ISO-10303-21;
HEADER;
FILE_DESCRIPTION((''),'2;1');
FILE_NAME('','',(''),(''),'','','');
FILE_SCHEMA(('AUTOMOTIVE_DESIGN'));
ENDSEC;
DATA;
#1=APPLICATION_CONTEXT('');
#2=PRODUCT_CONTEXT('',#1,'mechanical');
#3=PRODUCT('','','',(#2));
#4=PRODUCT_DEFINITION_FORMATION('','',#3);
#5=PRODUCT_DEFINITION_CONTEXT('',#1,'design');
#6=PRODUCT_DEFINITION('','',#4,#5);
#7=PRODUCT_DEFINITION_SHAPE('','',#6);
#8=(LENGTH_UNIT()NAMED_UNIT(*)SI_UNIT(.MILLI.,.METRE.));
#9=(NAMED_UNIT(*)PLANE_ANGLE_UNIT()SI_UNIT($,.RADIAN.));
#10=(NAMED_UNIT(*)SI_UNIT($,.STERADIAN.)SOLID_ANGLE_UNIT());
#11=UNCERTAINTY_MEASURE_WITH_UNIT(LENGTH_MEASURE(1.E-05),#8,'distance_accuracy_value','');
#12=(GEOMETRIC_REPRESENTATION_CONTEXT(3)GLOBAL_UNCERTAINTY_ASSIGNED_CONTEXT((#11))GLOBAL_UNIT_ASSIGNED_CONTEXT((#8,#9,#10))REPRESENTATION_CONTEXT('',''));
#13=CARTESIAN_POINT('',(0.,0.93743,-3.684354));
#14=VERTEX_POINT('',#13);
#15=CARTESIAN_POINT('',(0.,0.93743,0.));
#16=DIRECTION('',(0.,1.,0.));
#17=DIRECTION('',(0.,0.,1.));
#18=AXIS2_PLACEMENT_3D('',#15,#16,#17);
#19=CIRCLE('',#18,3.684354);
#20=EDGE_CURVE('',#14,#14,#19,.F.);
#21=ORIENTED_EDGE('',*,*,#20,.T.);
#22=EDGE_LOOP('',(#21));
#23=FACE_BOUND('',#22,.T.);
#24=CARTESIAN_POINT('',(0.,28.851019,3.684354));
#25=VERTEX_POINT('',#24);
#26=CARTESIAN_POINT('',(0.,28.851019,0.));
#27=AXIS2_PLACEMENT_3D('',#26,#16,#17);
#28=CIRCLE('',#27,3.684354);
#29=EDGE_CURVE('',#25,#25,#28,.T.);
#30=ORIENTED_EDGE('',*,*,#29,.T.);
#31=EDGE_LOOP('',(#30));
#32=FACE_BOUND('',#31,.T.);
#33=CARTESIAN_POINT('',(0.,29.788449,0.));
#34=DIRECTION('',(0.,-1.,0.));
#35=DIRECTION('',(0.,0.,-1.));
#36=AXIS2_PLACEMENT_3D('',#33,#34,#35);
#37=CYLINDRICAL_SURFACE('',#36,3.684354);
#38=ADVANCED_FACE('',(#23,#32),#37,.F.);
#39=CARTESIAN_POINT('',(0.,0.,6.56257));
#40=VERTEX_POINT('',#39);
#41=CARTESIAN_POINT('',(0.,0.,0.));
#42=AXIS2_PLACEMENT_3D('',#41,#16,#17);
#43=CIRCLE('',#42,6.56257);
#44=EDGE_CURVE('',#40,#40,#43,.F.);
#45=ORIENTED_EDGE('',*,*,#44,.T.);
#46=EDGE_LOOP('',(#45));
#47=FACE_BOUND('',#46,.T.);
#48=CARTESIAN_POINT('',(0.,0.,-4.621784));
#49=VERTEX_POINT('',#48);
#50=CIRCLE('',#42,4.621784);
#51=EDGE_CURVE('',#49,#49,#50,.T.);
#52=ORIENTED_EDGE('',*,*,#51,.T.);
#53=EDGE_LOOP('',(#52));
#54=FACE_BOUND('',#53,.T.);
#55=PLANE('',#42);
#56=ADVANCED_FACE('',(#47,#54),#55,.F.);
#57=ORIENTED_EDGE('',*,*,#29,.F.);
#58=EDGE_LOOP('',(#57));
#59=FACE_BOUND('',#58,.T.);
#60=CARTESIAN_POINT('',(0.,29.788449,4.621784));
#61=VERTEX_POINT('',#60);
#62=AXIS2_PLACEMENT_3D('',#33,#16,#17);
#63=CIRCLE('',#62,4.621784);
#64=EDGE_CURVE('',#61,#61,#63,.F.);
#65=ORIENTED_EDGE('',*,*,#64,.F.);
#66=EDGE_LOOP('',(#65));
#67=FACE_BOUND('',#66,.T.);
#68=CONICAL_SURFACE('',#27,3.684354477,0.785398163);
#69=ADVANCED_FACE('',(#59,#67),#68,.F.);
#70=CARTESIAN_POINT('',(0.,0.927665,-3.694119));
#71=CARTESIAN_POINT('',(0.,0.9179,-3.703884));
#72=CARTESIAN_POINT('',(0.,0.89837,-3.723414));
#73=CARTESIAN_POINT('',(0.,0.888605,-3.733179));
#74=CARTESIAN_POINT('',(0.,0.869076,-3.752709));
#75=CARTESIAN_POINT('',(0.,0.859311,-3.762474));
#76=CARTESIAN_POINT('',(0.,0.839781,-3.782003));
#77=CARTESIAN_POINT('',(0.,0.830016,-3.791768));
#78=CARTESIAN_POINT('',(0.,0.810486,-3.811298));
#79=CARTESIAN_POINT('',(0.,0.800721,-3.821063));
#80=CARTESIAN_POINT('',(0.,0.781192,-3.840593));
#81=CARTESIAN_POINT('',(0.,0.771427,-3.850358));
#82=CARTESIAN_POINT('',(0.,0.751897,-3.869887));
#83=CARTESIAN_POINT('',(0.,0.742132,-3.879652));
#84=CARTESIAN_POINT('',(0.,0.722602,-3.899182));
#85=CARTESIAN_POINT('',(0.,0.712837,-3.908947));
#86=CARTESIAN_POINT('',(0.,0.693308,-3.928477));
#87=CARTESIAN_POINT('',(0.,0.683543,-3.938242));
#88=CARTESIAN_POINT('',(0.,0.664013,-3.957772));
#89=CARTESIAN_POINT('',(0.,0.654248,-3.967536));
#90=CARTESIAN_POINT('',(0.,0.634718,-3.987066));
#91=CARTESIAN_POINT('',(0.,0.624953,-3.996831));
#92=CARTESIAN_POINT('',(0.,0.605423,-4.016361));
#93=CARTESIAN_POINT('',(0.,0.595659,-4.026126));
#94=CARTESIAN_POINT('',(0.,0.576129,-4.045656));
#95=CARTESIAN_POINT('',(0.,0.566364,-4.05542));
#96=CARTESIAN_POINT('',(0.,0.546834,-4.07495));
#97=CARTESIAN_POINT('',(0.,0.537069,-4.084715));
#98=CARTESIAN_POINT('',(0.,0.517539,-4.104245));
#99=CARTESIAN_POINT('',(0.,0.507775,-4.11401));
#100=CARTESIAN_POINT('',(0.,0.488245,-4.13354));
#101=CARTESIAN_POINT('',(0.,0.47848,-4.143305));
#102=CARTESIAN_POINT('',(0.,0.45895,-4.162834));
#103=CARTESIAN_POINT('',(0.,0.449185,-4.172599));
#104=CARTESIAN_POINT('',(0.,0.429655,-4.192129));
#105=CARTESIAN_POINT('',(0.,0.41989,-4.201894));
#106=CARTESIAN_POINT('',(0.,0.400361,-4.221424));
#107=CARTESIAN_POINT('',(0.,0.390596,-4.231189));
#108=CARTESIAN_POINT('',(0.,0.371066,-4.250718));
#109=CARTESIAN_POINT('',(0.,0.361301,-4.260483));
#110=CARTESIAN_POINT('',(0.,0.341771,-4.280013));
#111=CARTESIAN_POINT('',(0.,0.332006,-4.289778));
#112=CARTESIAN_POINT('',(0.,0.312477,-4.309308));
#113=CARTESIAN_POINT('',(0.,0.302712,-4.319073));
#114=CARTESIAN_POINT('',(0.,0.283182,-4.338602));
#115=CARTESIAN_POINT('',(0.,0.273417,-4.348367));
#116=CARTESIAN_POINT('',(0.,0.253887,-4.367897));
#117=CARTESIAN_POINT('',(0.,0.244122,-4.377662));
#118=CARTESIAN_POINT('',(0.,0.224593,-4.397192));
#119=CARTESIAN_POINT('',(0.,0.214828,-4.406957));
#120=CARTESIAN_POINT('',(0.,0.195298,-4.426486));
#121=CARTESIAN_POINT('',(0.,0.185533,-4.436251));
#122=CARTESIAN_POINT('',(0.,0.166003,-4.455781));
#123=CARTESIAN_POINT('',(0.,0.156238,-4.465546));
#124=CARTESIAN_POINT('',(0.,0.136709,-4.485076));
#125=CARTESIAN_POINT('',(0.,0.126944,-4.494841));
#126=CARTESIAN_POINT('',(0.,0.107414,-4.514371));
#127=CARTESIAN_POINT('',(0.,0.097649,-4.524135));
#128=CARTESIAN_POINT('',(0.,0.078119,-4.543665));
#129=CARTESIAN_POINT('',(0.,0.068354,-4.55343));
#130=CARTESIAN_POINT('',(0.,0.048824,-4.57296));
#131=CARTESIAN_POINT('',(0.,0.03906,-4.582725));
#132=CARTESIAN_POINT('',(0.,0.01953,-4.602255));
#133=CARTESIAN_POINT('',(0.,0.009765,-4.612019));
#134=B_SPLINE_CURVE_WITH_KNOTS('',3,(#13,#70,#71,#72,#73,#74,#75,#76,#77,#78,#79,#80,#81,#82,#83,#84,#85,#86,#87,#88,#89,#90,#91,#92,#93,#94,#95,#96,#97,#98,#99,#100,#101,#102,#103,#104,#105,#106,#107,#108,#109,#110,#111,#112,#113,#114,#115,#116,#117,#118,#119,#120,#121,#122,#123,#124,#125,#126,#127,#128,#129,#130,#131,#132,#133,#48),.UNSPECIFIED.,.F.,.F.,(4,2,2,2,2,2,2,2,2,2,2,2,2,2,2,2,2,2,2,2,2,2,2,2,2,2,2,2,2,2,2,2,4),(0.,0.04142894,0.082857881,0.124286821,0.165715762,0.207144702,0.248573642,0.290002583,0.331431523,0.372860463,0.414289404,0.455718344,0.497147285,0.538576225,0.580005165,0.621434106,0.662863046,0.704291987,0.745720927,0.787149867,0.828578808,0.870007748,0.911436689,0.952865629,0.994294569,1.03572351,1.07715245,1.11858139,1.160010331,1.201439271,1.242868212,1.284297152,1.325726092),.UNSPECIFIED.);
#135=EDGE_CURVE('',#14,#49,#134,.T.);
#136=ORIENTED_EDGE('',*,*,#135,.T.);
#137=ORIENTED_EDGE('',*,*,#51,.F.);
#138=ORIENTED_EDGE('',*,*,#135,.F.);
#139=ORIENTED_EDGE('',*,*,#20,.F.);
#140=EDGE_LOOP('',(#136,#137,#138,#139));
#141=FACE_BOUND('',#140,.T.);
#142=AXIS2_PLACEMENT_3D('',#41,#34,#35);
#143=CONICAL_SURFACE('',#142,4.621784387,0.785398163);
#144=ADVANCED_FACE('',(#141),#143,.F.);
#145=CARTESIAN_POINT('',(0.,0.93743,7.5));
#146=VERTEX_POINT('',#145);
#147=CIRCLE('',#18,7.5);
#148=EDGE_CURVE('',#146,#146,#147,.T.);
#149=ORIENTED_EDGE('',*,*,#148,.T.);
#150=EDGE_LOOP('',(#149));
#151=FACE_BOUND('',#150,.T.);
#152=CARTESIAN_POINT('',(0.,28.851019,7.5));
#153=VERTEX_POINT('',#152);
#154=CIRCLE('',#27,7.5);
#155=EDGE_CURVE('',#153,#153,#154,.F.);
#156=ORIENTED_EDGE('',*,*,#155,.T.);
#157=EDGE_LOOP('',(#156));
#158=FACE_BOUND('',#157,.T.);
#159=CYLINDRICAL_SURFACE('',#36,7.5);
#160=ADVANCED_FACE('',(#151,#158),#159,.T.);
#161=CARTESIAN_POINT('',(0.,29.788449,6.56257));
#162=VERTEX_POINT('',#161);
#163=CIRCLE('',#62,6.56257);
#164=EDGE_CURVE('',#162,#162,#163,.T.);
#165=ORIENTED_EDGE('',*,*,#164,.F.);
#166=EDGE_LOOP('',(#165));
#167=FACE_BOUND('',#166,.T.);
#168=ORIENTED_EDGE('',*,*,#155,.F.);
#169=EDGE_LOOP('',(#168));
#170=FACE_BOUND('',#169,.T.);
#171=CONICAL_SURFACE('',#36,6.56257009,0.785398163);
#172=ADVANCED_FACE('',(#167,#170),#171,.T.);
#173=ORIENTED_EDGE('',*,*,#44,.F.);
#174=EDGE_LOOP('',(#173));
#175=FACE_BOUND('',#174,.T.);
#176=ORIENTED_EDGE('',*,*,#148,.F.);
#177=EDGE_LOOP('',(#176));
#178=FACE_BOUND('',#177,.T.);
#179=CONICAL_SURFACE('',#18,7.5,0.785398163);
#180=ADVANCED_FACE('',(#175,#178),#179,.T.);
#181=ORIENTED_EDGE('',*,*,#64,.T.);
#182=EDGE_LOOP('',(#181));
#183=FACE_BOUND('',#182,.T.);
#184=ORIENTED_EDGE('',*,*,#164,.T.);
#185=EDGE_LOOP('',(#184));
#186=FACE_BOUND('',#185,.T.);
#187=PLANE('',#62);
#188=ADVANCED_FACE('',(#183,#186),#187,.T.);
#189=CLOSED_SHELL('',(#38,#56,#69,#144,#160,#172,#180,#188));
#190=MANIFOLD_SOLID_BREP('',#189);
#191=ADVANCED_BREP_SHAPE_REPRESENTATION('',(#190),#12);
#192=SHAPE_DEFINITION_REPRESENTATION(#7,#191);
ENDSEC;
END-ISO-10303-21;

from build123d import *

# Parameters (mm, degrees)
SKETCH1_R           = 7.5
BOSS_EXTRUDE1_DEPTH = 29.788449063
SKETCH2_R           = 3.684354477
CUT_EXTRUDE1_DEPTH  = 32.620431647
CHAMFER1_SIZE       = 0.93742991


with BuildPart() as part:
    # Sketch1 → Boss-Extrude1 (new body)
    with BuildSketch(Plane(origin=(0, 0, 0), x_dir=(1, 0, 0), z_dir=(0, 1, 0))):
        Circle(SKETCH1_R)
    extrude(amount=BOSS_EXTRUDE1_DEPTH)

    # Sketch2 → Cut-Extrude1 (cut, through all)
    with BuildSketch(Plane(origin=(0, 0, 0), x_dir=(1, 0, 0), z_dir=(0, 1, 0))):
        Circle(SKETCH2_R)
    extrude(amount=CUT_EXTRUDE1_DEPTH, mode=Mode.SUBTRACT)

    # Chamfer1
    chamfer1_edges = [part.edges().sort_by_distance(p)[0] for p in [
        (-3.684354477, 29.788449063, 0),
        (-3.684354477, 0, 0),
        (-7.5, 0, 0),
        (-7.5, 29.788449063, 0),
    ]]
    chamfer(chamfer1_edges, length=CHAMFER1_SIZE)


solid = part.part
